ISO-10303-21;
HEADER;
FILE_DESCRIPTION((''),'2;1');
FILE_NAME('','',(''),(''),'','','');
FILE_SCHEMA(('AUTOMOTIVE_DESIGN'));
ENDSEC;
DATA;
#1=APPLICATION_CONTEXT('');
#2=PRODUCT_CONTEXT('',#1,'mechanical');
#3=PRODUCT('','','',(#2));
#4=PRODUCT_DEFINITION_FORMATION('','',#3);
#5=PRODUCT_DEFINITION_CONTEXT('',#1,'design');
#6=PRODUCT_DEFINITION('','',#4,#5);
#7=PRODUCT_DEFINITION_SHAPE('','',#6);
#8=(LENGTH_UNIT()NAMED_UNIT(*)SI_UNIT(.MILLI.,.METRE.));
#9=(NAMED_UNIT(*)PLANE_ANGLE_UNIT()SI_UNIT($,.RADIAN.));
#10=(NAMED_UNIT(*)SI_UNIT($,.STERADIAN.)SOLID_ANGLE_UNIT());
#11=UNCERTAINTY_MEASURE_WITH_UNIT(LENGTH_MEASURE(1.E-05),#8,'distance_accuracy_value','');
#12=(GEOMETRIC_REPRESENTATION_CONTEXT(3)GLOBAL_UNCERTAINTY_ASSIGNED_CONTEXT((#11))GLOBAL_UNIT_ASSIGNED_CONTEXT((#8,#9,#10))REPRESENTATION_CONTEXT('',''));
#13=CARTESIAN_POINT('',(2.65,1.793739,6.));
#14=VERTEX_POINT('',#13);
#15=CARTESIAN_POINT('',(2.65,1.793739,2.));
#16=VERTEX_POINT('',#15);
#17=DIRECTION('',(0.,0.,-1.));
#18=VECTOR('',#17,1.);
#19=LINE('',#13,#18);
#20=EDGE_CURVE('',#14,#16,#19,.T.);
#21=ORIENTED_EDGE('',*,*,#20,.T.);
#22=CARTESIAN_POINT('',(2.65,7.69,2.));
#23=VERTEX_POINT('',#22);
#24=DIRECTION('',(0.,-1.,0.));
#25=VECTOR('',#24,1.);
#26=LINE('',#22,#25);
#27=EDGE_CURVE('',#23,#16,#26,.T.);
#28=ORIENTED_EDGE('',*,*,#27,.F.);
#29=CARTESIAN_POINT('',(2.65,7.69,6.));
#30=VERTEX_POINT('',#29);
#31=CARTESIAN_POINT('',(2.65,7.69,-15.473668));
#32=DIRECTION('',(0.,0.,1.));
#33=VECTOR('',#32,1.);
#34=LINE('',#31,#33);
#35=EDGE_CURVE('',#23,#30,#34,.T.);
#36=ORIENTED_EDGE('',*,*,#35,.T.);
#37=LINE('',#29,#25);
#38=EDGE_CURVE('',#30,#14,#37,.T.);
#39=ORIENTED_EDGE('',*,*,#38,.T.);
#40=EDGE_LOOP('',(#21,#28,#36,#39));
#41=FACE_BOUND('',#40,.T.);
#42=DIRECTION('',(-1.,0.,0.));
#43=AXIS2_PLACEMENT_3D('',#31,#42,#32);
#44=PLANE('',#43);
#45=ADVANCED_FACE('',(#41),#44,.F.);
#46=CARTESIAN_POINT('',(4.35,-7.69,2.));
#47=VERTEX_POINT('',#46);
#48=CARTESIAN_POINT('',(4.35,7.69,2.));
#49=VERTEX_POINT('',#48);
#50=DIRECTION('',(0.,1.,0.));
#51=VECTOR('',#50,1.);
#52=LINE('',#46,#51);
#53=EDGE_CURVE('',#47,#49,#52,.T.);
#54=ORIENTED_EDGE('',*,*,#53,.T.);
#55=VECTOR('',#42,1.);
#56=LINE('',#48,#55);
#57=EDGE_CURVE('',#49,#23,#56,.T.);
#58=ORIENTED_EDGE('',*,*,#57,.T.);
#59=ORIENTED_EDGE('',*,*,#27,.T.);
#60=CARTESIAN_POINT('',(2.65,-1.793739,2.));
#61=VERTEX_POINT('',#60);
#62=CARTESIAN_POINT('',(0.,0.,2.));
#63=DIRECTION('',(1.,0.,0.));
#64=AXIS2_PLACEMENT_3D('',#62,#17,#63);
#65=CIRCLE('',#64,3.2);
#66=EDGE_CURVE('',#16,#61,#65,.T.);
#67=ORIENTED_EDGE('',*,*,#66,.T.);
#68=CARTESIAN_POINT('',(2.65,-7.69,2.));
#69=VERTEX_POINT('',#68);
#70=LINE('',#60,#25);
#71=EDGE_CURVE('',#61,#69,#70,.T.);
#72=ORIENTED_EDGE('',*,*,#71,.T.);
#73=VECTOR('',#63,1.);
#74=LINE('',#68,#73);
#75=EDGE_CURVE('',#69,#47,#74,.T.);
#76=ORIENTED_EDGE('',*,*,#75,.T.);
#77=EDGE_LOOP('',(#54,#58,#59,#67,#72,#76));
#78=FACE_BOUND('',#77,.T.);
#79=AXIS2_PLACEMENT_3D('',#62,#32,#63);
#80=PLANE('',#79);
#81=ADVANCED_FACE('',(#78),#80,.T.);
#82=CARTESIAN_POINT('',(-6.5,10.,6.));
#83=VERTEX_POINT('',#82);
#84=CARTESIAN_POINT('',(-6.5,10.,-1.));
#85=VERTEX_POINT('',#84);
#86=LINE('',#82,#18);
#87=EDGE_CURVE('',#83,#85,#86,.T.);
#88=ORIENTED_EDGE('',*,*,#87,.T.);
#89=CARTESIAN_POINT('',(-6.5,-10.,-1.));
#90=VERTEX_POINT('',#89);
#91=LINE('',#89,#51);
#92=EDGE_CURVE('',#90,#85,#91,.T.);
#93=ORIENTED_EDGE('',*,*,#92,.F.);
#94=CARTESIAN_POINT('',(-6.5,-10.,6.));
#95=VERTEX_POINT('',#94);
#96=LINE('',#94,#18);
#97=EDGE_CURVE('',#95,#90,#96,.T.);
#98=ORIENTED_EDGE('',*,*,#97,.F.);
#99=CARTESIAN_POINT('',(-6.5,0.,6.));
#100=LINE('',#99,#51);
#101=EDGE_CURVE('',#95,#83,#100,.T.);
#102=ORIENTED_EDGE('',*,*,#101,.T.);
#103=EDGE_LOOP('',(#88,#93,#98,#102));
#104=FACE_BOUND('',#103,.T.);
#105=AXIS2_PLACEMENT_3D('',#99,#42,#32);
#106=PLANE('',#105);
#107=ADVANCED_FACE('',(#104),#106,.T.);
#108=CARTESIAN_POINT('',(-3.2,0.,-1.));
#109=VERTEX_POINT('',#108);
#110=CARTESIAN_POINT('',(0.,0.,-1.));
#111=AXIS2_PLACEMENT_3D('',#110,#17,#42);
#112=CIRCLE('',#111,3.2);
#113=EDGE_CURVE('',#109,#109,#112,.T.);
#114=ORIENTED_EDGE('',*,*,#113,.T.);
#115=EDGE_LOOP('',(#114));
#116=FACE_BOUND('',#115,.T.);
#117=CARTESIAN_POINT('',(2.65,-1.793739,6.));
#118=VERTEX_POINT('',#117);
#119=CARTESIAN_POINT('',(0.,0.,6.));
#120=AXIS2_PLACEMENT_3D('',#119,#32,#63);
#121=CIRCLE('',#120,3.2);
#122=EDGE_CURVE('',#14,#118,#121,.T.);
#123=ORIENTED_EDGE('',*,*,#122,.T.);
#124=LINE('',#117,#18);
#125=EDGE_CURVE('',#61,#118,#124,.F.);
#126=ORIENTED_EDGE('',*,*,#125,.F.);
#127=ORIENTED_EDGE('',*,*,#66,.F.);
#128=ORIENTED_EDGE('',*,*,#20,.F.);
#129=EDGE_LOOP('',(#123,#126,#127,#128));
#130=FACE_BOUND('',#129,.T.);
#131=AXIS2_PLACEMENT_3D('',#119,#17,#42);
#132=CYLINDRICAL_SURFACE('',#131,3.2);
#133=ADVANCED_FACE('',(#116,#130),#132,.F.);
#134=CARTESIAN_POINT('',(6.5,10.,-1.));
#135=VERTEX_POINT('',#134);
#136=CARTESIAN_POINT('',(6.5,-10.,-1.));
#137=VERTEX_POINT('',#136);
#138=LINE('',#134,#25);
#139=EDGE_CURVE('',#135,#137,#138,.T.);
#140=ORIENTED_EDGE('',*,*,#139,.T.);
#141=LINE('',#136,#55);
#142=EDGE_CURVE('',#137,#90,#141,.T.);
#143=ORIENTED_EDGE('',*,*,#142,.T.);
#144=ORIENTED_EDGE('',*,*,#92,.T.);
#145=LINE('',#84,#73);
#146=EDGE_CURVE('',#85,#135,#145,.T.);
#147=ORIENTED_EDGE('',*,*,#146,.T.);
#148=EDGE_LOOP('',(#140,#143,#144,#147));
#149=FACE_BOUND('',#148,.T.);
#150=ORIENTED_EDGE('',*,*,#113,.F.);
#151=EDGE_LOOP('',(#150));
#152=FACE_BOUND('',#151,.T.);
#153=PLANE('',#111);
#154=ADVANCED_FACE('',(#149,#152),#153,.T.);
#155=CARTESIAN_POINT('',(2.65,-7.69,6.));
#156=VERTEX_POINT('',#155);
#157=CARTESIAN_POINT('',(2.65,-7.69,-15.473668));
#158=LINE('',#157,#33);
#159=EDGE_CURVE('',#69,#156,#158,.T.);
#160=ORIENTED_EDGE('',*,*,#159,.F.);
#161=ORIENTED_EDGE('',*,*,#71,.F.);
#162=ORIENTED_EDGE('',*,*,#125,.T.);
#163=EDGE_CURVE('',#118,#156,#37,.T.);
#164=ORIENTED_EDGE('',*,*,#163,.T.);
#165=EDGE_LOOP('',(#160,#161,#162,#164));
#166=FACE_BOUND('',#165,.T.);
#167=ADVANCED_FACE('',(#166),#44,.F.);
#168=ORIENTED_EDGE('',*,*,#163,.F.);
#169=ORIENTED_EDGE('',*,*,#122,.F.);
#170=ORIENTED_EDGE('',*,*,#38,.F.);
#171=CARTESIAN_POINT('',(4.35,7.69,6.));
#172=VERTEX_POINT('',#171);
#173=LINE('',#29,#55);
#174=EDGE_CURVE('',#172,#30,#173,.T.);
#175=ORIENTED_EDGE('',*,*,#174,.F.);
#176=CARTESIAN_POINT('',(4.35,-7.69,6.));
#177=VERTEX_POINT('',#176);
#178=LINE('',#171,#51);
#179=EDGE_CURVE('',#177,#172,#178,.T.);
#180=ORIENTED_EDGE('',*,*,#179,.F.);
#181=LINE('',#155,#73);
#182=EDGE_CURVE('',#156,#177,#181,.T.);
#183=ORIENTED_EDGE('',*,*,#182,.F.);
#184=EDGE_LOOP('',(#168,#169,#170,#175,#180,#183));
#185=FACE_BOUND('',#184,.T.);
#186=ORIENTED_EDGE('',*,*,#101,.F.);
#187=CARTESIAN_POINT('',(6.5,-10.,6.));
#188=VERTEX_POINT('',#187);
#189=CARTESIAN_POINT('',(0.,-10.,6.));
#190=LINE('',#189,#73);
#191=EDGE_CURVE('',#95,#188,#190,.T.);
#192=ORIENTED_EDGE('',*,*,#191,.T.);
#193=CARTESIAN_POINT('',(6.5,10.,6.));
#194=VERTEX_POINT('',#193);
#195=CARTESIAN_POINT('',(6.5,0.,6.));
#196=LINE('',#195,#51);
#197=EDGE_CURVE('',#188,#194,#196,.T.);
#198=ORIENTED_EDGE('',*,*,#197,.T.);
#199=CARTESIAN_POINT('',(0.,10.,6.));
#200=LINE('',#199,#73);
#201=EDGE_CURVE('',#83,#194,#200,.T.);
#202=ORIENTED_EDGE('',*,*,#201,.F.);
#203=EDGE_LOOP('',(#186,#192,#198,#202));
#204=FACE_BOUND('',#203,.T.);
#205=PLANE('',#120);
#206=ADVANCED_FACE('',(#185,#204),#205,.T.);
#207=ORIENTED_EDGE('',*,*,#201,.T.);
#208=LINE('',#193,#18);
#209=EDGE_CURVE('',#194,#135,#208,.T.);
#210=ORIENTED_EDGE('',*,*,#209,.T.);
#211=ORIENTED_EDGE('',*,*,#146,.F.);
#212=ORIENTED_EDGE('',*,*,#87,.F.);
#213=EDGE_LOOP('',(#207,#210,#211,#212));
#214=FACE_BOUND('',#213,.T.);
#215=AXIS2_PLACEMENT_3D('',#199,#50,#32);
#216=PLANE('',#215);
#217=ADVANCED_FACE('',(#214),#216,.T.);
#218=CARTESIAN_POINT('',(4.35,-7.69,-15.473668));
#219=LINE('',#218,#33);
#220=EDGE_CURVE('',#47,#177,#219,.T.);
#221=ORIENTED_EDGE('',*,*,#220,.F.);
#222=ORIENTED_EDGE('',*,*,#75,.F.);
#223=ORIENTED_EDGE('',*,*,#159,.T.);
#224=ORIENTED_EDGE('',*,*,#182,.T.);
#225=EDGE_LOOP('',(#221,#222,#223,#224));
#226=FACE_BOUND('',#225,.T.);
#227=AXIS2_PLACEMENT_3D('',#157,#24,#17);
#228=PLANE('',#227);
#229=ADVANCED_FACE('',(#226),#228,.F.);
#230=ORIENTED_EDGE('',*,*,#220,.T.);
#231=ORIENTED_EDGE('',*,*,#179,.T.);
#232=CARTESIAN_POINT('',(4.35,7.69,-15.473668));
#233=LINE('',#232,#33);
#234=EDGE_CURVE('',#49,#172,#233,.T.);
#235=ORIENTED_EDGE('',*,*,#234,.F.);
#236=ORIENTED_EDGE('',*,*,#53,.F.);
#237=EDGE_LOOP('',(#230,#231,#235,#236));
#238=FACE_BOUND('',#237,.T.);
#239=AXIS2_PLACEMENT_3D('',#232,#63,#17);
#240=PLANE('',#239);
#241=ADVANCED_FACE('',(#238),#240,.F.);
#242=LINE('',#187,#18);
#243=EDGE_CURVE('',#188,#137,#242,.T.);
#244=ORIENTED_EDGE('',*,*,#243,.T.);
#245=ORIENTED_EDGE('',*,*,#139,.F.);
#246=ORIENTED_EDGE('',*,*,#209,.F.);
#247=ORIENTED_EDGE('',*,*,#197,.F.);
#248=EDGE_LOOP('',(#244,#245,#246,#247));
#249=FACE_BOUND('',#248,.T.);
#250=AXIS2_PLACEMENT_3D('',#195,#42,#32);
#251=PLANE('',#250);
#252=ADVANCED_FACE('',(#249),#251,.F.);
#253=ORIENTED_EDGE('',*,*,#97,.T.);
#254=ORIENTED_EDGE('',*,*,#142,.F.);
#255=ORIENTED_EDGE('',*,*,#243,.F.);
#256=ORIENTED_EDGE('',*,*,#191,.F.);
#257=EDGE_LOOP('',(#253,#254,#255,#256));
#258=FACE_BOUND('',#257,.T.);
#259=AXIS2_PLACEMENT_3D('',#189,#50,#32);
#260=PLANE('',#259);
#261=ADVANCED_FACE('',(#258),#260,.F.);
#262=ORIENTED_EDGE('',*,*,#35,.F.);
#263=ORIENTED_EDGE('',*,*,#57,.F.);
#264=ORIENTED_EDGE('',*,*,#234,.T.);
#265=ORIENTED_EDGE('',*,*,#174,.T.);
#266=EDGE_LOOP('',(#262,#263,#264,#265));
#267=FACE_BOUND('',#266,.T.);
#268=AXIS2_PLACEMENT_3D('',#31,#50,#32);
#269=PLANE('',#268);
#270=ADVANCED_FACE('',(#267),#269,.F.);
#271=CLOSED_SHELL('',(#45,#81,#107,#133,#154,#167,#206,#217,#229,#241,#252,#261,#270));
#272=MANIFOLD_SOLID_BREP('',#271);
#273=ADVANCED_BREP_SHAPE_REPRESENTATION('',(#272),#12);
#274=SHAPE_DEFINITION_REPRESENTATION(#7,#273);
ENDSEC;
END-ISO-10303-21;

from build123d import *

# Parameters (mm, degrees)
SKETCH2_W           = 13
SKETCH2_H           = 20
BOSS_EXTRUDE1_DEPTH = 6
BOSS_EXTRUDE2_DEPTH = 2
BOSS_EXTRUDE3_START = 1
SKETCH3_W           = 13
SKETCH3_H           = 20
SKETCH3_R           = 3.2
BOSS_EXTRUDE3_DEPTH = 1
BOSS_EXTRUDE4_DEPTH = 4
CUT_EXTRUDE1_START  = -6
CUT_EXTRUDE1_DEPTH  = 6
BOSS_EXTRUDE5_DEPTH = 2


# Read off the part's stored shape, not the designer's step: Cut-Extrude1
with BuildPart() as part:
    # Sketch2 → Boss-Extrude1 (new body)
    with BuildSketch(Plane.XY):
        Rectangle(SKETCH2_W, SKETCH2_H)
        with BuildLine():
            Line((1.3, -9.04), (1.3, -2.924038303))
            ThreePointArc((1.3, -2.924038303), (-3.2, 0), (1.3, 2.924038303))
            Line((1.3, 2.924038303), (1.3, 9.04))
            Line((1.3, 9.04), (5.7, 9.04))
            Line((5.7, 9.04), (5.7, -9.04))
            Line((5.7, -9.04), (1.3, -9.04))
        make_face(mode=Mode.SUBTRACT)
    extrude(amount=BOSS_EXTRUDE1_DEPTH)

    # Sketch2<3> → Boss-Extrude2 (add)
    with BuildSketch(Plane.XY):
        with BuildLine():
            Line((4.2, 7.54), (4.2, -7.54))
            Line((4.2, -7.54), (2.8, -7.54))
            Line((2.8, -7.54), (2.8, -1.549193338))
            ThreePointArc((2.8, -1.549193338), (2.162186317, -2.359014695), (1.3, -2.924038303))
            Line((1.3, -2.924038303), (1.3, -9.04))
            Line((1.3, -9.04), (5.7, -9.04))
            Line((5.7, -9.04), (5.7, 9.04))
            Line((5.7, 9.04), (1.3, 9.04))
            Line((1.3, 9.04), (1.3, 2.924038303))
            ThreePointArc((1.3, 2.924038303), (2.162186317, 2.359014695), (2.8, 1.549193338))
            Line((2.8, 1.549193338), (2.8, 7.54))
            Line((2.8, 7.54), (4.2, 7.54))
        make_face()
    extrude(amount=BOSS_EXTRUDE2_DEPTH)

    # Sketch3 → Boss-Extrude3 (add)
    with BuildSketch(Plane(origin=(0, 0, 0), x_dir=(-1, 0, 0), z_dir=(0, 0, -1)).offset(BOSS_EXTRUDE3_START)):
        Rectangle(SKETCH3_W, SKETCH3_H)
        Circle(SKETCH3_R, mode=Mode.SUBTRACT)
    extrude(amount=-BOSS_EXTRUDE3_DEPTH)

    # Sketch4 → Boss-Extrude4 (add)
    with BuildSketch(Plane.XY.offset(2)):
        with BuildLine():
            Line((2.8, 1.549193338), (2.8, 7.54))
            Line((2.8, 7.54), (4.2, 7.54))
            Line((4.2, 7.54), (4.2, -7.54))
            Line((4.2, -7.54), (2.8, -7.54))
            Line((2.8, -7.54), (2.8, -1.549193338))
            ThreePointArc((2.8, -1.549193338), (2.162186317, -2.359014695), (1.3, -2.924038303))
            Line((1.3, -2.924038303), (1.3, -9.04))
            Line((1.3, -9.04), (5.7, -9.04))
            Line((5.7, -9.04), (5.7, 9.04))
            Line((5.7, 9.04), (1.3, 9.04))
            Line((1.3, 9.04), (1.3, 2.924038303))
            ThreePointArc((1.3, 2.924038303), (2.162186317, 2.359014695), (2.8, 1.549193338))
        make_face()
    extrude(amount=BOSS_EXTRUDE4_DEPTH)

    # Cut-Extrude1 outline → Cut-Extrude1 (cut)
    with BuildSketch(Plane.XY.offset(6).offset(CUT_EXTRUDE1_START)):
        with BuildLine():
            Line((4.35, 7.69), (2.65, 7.69))
            Line((2.65, 7.69), (2.65, 1.793739111))
            ThreePointArc((2.65, 1.793739111), (2.727741861, 1.673148033), (2.8, 1.549193338))
            Line((2.8, 1.549193338), (2.8, 7.54))
            Line((2.8, 7.54), (4.2, 7.54))
            Line((4.2, 7.54), (4.2, -7.54))
            Line((4.2, -7.54), (2.8, -7.54))
            Line((2.8, -7.54), (2.8, -1.549193338))
            ThreePointArc((2.8, -1.549193338), (2.727741861, -1.673148033), (2.65, -1.793739111))
            Line((2.65, -1.793739111), (2.65, -7.69))
            Line((2.65, -7.69), (4.35, -7.69))
            Line((4.35, -7.69), (4.35, 7.69))
        make_face()
    extrude(amount=CUT_EXTRUDE1_DEPTH, mode=Mode.SUBTRACT)

    # Sketch7 → Boss-Extrude5 (add)
    with BuildSketch(Plane.XY):
        with BuildLine():
            Line((2.65, 7.69), (2.65, 1.793739111))
            ThreePointArc((2.65, 1.793739111), (3.2, 0), (2.65, -1.793739111))
            Line((2.65, -1.793739111), (2.65, -7.69))
            Line((2.65, -7.69), (4.35, -7.69))
            Line((4.35, -7.69), (4.35, 7.69))
            Line((4.35, 7.69), (2.65, 7.69))
        make_face()
    extrude(amount=BOSS_EXTRUDE5_DEPTH)


solid = part.part
